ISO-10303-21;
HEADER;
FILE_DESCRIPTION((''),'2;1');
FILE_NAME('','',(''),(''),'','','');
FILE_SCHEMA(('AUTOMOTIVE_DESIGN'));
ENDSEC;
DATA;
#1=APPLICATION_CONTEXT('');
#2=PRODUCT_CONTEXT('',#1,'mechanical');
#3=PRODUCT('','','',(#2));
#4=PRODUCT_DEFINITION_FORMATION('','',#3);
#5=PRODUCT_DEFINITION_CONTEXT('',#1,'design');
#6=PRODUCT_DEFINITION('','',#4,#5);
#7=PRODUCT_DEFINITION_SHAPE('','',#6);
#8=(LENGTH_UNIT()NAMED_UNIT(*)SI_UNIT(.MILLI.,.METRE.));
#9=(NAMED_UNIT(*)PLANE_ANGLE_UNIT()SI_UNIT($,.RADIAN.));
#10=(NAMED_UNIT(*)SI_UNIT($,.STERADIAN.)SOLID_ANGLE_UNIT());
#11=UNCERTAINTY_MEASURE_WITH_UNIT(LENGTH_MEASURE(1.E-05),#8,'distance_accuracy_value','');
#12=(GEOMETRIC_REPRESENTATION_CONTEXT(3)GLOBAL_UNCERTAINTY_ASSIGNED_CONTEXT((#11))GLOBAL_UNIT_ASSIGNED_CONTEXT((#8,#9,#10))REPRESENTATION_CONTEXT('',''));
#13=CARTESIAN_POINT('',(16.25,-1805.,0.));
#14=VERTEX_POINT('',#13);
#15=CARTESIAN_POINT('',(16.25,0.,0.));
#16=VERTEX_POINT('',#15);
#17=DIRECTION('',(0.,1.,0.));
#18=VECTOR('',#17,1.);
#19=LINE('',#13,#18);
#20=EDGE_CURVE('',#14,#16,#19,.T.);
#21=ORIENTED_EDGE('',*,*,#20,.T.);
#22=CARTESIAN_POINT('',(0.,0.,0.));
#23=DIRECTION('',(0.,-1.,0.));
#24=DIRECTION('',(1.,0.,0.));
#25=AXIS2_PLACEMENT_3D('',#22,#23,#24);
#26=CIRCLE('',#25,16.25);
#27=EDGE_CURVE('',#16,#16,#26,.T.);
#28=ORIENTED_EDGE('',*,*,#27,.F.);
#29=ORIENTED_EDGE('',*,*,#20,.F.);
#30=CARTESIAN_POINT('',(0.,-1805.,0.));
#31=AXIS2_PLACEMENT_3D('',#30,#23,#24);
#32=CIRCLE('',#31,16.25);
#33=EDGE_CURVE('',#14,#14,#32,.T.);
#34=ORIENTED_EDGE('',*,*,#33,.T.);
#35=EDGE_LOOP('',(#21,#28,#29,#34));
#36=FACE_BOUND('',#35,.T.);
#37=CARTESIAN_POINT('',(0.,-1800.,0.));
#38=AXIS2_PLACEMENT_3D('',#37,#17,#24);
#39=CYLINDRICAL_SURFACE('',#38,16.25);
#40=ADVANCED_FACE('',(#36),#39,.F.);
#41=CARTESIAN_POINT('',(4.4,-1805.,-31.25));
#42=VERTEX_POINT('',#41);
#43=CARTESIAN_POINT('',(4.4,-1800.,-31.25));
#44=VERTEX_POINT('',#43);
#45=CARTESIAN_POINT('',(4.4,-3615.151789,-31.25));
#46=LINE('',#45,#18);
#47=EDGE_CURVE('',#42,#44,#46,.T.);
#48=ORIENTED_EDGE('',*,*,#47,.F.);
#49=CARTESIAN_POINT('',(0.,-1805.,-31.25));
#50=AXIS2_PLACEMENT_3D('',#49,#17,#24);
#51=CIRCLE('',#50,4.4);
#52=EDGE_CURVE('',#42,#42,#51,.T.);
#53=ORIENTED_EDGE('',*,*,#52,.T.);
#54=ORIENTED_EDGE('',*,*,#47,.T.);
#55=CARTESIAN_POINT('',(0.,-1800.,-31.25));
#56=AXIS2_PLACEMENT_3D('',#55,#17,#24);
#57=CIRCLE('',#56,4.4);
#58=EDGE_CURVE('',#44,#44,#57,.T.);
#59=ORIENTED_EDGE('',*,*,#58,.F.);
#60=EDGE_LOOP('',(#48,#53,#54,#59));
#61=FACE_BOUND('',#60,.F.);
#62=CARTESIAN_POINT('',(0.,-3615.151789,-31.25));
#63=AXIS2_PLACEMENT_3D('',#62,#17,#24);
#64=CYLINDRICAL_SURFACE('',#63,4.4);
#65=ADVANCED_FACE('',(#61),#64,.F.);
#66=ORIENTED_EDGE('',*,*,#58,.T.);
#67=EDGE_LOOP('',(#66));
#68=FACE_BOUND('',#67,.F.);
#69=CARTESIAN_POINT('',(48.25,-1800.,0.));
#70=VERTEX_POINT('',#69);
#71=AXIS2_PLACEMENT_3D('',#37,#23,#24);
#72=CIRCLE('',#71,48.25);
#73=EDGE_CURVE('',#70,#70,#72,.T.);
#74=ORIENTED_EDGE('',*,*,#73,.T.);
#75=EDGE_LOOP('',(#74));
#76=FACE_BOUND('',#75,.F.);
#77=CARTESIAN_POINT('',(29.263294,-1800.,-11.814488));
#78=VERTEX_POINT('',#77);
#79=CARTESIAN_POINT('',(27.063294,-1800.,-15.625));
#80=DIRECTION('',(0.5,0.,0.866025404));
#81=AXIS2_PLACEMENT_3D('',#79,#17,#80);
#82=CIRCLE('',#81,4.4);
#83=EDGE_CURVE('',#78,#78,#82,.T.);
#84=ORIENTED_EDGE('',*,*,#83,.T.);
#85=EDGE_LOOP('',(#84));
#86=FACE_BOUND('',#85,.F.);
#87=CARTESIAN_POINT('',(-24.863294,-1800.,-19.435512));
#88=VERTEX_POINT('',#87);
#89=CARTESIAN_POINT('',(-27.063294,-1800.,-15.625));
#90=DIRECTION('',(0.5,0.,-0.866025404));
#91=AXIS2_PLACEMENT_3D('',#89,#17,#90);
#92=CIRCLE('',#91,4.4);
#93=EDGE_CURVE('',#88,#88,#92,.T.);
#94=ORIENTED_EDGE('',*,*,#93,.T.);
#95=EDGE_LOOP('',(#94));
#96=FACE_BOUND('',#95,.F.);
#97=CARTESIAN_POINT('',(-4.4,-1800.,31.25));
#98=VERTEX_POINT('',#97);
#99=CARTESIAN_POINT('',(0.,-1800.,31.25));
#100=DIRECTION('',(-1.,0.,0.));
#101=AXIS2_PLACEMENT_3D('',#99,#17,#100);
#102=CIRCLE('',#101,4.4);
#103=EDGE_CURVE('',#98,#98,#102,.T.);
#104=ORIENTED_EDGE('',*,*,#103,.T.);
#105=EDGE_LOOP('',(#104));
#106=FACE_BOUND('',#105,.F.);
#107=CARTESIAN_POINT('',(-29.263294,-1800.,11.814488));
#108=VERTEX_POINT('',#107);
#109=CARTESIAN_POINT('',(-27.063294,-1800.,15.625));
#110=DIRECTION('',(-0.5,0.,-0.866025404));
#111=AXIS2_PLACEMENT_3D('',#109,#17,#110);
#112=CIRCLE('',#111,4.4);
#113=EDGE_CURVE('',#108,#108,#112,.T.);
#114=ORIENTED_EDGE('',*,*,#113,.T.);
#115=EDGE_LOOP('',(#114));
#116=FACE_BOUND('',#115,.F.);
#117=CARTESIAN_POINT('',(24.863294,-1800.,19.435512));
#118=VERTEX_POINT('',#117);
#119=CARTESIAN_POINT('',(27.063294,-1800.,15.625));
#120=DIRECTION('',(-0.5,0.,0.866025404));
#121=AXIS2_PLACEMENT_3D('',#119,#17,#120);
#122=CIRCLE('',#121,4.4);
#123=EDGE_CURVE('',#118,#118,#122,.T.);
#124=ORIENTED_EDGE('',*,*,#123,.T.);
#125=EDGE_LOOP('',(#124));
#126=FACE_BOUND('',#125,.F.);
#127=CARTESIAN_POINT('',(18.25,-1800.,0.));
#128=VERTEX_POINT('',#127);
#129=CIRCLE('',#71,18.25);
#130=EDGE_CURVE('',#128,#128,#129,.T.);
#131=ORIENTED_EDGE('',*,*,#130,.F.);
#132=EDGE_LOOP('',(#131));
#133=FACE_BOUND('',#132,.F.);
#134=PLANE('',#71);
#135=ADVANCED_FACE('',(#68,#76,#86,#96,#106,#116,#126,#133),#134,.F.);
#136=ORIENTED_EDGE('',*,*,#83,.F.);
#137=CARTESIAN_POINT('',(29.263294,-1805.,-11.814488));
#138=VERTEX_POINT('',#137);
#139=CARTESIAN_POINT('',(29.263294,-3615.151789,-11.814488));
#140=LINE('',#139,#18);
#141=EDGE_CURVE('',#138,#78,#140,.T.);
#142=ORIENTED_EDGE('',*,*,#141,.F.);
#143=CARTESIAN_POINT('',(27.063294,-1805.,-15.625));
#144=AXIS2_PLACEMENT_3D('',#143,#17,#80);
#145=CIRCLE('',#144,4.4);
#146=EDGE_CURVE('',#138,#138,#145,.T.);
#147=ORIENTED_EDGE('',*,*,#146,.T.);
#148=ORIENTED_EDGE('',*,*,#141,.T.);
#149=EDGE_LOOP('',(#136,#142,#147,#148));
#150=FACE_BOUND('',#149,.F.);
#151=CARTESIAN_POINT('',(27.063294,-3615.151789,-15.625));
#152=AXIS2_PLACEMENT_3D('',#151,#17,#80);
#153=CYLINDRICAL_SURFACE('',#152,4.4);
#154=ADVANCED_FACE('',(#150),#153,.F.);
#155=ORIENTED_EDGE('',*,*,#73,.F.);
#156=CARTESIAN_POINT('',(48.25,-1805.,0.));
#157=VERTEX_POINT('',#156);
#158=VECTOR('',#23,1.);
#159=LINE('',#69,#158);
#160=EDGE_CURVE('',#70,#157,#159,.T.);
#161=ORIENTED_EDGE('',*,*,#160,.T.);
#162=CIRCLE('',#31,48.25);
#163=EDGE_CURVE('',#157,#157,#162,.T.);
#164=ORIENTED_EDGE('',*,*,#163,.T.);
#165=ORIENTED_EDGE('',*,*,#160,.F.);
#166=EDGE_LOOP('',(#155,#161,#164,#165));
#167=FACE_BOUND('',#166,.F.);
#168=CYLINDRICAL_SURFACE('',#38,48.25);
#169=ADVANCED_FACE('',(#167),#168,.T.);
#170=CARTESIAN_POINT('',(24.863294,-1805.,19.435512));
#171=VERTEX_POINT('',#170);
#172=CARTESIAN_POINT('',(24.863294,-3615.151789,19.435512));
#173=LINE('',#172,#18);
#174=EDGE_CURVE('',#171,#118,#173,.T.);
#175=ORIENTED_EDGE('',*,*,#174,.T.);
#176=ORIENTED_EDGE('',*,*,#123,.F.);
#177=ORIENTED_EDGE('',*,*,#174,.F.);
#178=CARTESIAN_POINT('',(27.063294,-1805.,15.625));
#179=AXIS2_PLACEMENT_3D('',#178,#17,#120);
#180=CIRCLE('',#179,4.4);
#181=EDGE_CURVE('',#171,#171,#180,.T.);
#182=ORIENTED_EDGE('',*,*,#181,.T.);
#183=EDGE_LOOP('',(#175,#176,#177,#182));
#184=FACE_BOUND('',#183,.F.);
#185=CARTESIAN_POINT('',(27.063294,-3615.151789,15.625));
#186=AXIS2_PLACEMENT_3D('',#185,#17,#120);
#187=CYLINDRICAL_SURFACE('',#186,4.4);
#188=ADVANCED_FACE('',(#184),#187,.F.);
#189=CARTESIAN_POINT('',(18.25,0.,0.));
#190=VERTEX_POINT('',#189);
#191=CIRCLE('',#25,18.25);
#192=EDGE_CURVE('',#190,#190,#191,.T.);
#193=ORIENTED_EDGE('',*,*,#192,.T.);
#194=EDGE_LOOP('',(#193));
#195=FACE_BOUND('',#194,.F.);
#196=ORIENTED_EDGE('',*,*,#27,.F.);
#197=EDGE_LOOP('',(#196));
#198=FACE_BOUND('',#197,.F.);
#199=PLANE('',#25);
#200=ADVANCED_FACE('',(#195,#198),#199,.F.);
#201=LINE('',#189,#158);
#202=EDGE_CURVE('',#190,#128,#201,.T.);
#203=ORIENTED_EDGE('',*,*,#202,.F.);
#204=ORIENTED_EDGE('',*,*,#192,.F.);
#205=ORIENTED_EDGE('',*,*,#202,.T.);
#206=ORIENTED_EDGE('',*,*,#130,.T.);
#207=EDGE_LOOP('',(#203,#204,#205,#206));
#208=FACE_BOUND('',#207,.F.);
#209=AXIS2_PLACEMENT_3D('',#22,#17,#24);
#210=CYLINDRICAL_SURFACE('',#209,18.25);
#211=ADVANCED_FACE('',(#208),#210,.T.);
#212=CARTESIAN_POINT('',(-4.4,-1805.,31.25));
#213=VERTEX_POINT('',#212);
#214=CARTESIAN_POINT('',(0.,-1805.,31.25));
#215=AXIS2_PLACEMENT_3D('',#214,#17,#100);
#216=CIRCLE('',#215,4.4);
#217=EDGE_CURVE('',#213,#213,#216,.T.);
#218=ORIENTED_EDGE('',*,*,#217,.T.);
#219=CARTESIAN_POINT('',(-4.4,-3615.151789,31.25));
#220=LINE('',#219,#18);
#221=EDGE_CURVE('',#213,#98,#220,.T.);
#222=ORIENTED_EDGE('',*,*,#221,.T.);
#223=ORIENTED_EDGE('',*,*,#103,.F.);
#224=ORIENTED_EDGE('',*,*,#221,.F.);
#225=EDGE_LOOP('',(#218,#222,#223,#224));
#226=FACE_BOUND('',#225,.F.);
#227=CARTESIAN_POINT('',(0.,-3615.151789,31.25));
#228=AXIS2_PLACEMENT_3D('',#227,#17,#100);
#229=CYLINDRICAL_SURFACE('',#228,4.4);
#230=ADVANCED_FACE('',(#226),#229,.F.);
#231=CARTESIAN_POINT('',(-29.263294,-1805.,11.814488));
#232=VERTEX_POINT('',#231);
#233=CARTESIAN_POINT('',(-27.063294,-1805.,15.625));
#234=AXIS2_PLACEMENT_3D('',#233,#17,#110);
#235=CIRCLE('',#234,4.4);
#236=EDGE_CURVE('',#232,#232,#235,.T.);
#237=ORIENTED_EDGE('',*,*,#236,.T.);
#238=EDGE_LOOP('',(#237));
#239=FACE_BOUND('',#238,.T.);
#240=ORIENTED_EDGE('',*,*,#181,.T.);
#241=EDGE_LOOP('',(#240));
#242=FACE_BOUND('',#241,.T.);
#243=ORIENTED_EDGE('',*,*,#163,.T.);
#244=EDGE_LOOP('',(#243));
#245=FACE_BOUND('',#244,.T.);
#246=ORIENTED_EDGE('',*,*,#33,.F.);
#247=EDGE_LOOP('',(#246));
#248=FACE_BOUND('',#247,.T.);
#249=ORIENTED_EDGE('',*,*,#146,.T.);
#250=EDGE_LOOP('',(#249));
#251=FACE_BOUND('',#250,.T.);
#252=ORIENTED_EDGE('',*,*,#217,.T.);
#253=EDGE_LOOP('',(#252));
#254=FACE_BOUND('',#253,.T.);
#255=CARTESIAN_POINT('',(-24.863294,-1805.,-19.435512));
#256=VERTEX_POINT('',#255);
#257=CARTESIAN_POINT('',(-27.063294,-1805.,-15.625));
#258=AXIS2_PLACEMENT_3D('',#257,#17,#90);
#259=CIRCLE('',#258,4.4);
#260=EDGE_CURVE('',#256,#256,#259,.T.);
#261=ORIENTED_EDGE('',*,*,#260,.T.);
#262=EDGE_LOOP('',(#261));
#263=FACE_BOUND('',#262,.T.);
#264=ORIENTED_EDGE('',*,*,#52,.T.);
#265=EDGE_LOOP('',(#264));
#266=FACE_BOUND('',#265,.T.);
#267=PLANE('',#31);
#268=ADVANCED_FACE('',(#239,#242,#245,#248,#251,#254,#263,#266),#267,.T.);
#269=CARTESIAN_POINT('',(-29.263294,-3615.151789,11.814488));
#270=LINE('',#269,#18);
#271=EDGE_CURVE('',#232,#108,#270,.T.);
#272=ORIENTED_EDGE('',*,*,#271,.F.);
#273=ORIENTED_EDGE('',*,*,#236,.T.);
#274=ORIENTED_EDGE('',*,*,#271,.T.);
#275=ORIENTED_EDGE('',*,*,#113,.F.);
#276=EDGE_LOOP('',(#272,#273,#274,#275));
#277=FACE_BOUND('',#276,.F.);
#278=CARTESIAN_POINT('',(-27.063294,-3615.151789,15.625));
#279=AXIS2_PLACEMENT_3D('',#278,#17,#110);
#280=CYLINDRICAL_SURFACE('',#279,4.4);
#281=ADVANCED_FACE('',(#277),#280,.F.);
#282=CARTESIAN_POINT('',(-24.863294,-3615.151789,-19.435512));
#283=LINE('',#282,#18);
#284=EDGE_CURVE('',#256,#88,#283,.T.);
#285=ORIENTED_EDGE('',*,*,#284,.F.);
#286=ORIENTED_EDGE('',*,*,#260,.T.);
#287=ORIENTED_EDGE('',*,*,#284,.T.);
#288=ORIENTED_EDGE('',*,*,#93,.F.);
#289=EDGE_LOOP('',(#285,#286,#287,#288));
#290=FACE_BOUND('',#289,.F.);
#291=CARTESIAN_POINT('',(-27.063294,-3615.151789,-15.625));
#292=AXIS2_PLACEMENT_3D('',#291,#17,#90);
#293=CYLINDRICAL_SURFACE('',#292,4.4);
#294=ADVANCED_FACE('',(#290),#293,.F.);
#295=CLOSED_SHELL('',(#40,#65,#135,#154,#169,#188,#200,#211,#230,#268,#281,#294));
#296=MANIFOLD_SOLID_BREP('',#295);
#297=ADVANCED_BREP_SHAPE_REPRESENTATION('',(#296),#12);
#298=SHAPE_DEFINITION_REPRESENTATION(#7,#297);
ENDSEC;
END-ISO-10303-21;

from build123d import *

# Parameters (mm, degrees)
F0_R            = 18.25
F0_R_2          = 16.25
F1_DEPTH        = 1800
F2_R            = 48.25
F2_R_2          = 18.25
F2_R_3          = 16.25
F3_DEPTH        = 5
F5_D            = 8.8
F5_COPIES_COUNT = 6


# Not quite as in the source:
# - a pattern or mirror of a feature is missing from the dataset's text; its kind, count and spacing are read off the source's solid


with BuildPart() as f1:
    # F0 (on Front) → F1 (new body)
    with BuildSketch(Plane.XZ):
        Circle(F0_R)
        Circle(F0_R_2, mode=Mode.SUBTRACT)
    extrude(amount=F1_DEPTH)

    # F2 (on face) → F3 (join)
    with BuildSketch(Plane.XZ.offset(1800)):
        Circle(F2_R)
        Circle(F2_R_2, mode=Mode.SUBTRACT)
        Circle(F2_R_2)
        Circle(F2_R_3, mode=Mode.SUBTRACT)
    extrude(amount=F3_DEPTH)

    # F5 (through all)
    with Locations(Plane.XZ.offset(1805)):
        with Locations((0, 31.25)):
            f5 = Hole(F5_D / 2)

    # F5_copies: F5 ×6 about axis
    f5_copies_axis = Axis((0, 0, 0), (0, 1, 0))
    for i in range(1, F5_COPIES_COUNT):
        add(f5.rotate(f5_copies_axis, i * 360 / F5_COPIES_COUNT), mode=Mode.SUBTRACT)


solid = f1.part
